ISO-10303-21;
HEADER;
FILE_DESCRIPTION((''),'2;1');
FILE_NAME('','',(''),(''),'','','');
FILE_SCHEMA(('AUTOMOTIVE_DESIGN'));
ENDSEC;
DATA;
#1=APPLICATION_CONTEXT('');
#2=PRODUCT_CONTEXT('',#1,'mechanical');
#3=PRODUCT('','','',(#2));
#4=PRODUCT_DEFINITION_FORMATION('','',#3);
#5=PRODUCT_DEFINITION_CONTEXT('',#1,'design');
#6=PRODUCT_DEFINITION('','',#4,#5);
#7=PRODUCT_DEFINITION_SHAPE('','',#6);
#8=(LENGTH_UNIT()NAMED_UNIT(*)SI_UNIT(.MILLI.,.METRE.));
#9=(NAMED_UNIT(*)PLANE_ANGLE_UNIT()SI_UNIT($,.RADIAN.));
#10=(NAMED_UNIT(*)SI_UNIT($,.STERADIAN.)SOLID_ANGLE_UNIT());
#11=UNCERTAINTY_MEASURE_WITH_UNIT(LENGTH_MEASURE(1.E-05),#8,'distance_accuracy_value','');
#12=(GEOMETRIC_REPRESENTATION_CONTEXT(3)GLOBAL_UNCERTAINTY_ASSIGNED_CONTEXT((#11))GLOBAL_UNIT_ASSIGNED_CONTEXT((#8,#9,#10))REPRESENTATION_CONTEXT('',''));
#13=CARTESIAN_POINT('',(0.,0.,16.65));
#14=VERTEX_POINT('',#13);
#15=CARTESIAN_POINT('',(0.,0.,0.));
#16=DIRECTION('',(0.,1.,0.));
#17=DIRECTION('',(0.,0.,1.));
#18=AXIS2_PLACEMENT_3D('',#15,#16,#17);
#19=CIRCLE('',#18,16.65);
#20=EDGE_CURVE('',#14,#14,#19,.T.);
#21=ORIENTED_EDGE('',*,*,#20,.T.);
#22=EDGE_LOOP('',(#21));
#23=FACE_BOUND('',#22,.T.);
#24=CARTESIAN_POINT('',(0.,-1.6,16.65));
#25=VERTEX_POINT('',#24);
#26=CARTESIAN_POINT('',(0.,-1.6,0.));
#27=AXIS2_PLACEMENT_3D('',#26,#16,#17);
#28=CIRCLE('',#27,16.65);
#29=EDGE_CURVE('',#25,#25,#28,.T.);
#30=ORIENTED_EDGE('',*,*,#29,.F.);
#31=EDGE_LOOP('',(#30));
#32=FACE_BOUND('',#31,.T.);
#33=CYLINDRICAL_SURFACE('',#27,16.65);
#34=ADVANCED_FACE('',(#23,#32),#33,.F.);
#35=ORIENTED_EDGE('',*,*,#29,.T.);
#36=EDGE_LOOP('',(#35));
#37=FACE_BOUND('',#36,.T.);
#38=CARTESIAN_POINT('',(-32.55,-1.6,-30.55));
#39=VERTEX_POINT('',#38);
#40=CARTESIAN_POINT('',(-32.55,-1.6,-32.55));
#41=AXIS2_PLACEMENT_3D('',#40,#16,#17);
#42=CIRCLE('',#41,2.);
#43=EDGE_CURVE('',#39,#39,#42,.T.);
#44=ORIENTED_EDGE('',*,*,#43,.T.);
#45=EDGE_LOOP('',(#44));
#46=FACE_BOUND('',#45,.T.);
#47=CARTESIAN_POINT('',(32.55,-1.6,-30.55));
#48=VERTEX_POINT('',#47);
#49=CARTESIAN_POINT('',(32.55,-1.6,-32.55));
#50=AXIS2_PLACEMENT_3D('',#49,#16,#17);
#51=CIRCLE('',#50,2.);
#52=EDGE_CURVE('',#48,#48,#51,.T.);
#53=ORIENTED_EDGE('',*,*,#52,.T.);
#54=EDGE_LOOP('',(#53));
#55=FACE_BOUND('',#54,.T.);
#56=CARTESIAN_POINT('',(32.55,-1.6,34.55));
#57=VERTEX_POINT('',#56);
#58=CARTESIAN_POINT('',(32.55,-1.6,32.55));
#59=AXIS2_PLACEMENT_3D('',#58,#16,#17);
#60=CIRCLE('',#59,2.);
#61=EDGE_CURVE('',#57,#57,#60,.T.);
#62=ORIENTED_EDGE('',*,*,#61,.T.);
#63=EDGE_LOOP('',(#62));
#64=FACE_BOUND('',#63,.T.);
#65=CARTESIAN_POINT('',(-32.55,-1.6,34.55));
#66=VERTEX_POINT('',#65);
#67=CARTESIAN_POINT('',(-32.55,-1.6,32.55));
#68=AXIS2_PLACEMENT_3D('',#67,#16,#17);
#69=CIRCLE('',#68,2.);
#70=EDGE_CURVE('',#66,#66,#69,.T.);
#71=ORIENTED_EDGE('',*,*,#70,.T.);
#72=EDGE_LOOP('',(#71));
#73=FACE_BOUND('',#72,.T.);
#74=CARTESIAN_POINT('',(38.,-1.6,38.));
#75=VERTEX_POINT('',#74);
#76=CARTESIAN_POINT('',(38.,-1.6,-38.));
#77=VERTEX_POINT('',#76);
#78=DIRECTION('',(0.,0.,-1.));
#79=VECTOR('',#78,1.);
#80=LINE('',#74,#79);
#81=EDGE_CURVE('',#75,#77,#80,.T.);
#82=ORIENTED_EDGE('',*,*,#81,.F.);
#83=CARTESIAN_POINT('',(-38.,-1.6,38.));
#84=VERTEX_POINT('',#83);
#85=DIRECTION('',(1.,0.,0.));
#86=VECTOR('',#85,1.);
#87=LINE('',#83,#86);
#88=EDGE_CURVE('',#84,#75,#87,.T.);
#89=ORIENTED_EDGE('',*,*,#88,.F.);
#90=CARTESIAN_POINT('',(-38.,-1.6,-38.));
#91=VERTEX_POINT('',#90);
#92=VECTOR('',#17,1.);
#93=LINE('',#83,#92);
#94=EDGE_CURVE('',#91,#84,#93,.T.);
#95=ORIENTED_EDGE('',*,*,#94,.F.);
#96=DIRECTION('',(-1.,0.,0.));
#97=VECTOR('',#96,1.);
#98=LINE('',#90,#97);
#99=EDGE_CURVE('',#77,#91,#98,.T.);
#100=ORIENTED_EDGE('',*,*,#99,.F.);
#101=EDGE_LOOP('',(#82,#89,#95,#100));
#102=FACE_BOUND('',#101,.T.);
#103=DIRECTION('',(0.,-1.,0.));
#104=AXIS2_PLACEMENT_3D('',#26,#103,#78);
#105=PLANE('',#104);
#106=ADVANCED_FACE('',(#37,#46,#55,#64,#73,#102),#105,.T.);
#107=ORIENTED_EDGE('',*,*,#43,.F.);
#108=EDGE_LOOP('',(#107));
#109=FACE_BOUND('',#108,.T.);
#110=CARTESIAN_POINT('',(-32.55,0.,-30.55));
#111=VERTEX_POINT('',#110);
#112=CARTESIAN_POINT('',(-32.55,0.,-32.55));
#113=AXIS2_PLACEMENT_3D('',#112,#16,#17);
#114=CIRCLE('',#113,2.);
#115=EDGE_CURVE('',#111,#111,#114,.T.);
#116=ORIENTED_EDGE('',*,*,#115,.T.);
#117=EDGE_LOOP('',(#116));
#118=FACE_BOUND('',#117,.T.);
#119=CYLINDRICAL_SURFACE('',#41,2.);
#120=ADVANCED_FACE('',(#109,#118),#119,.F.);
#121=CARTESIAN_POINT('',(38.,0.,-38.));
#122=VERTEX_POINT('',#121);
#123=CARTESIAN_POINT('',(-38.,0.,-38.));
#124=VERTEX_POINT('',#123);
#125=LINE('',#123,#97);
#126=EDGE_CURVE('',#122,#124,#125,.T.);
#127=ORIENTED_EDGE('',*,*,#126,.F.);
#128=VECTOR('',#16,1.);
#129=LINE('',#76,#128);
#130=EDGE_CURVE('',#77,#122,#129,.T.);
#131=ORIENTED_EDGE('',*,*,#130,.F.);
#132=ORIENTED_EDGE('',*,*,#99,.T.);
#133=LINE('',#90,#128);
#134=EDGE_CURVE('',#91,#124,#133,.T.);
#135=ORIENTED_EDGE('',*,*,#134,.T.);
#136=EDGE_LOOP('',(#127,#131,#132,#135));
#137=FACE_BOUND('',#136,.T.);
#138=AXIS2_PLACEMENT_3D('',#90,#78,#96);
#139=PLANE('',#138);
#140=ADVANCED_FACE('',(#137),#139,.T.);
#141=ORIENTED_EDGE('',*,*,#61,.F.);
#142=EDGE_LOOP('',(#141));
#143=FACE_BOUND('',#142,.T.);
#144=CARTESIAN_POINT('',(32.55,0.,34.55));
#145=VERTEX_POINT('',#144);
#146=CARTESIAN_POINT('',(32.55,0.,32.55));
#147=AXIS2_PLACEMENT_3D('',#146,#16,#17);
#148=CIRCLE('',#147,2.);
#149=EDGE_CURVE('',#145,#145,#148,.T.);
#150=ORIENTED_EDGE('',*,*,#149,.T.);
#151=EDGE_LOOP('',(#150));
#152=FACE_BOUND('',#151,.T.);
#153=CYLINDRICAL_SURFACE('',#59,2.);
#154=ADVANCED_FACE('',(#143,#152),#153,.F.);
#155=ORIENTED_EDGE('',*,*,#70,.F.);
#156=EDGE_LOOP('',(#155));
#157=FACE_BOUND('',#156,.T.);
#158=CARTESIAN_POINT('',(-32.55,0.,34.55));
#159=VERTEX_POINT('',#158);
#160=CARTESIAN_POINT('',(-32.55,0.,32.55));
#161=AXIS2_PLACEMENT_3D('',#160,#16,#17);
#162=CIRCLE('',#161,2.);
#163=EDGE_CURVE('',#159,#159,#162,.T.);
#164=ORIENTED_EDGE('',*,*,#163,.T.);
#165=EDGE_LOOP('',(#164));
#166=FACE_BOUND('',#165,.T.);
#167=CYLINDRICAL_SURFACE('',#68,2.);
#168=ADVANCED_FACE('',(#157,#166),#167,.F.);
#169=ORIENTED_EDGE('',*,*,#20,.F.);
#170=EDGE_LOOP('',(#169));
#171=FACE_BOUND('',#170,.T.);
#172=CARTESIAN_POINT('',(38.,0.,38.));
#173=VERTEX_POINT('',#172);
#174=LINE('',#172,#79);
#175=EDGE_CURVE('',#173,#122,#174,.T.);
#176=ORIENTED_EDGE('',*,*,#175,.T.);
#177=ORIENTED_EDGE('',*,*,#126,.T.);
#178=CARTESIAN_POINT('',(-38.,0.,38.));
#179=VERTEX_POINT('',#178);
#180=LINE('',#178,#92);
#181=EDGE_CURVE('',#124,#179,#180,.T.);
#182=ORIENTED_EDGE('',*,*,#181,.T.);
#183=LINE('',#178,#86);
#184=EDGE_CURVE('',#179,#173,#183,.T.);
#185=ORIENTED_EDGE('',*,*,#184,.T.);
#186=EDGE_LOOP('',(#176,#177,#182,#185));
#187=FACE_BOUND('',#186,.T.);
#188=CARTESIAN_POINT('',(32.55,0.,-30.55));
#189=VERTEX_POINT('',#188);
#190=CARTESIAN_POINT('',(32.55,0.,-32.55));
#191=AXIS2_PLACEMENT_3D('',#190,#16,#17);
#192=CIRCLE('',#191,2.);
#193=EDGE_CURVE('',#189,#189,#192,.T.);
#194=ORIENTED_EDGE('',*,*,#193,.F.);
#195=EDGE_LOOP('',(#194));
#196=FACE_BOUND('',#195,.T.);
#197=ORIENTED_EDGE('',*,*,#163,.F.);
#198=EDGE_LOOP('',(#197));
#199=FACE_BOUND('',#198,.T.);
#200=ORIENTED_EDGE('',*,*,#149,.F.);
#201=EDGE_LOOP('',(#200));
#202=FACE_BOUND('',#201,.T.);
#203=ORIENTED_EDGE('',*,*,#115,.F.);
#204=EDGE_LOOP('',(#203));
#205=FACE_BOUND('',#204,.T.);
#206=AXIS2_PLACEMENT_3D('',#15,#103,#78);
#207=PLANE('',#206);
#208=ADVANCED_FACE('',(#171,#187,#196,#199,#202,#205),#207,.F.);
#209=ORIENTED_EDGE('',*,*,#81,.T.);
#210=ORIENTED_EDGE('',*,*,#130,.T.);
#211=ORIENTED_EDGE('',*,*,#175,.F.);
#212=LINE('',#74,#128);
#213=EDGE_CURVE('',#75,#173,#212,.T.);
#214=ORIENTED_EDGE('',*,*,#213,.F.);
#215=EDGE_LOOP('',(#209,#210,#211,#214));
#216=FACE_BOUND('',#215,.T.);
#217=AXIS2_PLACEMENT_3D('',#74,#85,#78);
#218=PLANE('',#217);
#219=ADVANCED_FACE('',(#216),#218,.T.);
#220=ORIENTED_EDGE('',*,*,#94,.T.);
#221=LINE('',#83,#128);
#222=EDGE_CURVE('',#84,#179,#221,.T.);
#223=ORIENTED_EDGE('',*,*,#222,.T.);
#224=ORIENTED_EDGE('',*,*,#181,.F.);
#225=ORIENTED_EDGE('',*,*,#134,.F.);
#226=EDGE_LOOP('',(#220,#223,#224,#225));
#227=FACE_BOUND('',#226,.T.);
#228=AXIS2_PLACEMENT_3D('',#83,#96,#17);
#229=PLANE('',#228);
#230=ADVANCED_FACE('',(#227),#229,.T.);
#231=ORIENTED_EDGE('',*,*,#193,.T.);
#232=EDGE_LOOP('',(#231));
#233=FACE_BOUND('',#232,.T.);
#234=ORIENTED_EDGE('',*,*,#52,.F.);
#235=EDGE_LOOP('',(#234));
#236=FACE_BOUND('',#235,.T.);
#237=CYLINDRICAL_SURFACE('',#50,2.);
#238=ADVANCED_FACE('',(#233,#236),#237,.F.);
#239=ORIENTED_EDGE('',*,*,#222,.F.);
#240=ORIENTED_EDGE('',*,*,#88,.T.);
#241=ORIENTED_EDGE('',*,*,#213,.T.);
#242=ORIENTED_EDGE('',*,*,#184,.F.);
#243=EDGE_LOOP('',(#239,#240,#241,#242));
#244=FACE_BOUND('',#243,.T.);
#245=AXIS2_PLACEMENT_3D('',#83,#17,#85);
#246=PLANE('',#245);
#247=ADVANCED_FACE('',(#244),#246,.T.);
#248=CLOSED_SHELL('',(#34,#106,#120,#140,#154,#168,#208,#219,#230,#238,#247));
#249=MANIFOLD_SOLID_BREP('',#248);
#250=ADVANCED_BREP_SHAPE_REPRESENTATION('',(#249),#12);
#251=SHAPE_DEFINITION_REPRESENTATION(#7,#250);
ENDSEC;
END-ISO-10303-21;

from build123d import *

# Parameters (mm, degrees)
SKETCH1_W          = 76
SKETCH1_H          = 76
SKETCH1_R          = 2
SKETCH1_R_2        = 16.65
BASE_FLANGE1_DEPTH = 1.6


# Sheet-metal steps are written as plain solids
with BuildPart() as part:
    # Sketch1 → Base-Flange1 (new body)
    with BuildSketch(Plane(origin=(0, 0, 0), x_dir=(1, 0, 0), z_dir=(0, 1, 0))):
        Rectangle(SKETCH1_W, SKETCH1_H)
        with Locations(Location((32.55, 32.55, 0), (0, 0, 270))):
            Circle(SKETCH1_R, mode=Mode.SUBTRACT)
        with Locations(Location((0, 0, 0), (0, 0, 270))):
            Circle(SKETCH1_R_2, mode=Mode.SUBTRACT)
        with Locations(Location((32.55, -32.55, 0), (0, 0, 270))):
            Circle(SKETCH1_R, mode=Mode.SUBTRACT)
        with Locations(Location((-32.55, -32.55, 0), (0, 0, 270))):
            Circle(SKETCH1_R, mode=Mode.SUBTRACT)
        with Locations(Location((-32.55, 32.55, 0), (0, 0, 270))):
            Circle(SKETCH1_R, mode=Mode.SUBTRACT)
    extrude(amount=-BASE_FLANGE1_DEPTH)


solid = part.part
